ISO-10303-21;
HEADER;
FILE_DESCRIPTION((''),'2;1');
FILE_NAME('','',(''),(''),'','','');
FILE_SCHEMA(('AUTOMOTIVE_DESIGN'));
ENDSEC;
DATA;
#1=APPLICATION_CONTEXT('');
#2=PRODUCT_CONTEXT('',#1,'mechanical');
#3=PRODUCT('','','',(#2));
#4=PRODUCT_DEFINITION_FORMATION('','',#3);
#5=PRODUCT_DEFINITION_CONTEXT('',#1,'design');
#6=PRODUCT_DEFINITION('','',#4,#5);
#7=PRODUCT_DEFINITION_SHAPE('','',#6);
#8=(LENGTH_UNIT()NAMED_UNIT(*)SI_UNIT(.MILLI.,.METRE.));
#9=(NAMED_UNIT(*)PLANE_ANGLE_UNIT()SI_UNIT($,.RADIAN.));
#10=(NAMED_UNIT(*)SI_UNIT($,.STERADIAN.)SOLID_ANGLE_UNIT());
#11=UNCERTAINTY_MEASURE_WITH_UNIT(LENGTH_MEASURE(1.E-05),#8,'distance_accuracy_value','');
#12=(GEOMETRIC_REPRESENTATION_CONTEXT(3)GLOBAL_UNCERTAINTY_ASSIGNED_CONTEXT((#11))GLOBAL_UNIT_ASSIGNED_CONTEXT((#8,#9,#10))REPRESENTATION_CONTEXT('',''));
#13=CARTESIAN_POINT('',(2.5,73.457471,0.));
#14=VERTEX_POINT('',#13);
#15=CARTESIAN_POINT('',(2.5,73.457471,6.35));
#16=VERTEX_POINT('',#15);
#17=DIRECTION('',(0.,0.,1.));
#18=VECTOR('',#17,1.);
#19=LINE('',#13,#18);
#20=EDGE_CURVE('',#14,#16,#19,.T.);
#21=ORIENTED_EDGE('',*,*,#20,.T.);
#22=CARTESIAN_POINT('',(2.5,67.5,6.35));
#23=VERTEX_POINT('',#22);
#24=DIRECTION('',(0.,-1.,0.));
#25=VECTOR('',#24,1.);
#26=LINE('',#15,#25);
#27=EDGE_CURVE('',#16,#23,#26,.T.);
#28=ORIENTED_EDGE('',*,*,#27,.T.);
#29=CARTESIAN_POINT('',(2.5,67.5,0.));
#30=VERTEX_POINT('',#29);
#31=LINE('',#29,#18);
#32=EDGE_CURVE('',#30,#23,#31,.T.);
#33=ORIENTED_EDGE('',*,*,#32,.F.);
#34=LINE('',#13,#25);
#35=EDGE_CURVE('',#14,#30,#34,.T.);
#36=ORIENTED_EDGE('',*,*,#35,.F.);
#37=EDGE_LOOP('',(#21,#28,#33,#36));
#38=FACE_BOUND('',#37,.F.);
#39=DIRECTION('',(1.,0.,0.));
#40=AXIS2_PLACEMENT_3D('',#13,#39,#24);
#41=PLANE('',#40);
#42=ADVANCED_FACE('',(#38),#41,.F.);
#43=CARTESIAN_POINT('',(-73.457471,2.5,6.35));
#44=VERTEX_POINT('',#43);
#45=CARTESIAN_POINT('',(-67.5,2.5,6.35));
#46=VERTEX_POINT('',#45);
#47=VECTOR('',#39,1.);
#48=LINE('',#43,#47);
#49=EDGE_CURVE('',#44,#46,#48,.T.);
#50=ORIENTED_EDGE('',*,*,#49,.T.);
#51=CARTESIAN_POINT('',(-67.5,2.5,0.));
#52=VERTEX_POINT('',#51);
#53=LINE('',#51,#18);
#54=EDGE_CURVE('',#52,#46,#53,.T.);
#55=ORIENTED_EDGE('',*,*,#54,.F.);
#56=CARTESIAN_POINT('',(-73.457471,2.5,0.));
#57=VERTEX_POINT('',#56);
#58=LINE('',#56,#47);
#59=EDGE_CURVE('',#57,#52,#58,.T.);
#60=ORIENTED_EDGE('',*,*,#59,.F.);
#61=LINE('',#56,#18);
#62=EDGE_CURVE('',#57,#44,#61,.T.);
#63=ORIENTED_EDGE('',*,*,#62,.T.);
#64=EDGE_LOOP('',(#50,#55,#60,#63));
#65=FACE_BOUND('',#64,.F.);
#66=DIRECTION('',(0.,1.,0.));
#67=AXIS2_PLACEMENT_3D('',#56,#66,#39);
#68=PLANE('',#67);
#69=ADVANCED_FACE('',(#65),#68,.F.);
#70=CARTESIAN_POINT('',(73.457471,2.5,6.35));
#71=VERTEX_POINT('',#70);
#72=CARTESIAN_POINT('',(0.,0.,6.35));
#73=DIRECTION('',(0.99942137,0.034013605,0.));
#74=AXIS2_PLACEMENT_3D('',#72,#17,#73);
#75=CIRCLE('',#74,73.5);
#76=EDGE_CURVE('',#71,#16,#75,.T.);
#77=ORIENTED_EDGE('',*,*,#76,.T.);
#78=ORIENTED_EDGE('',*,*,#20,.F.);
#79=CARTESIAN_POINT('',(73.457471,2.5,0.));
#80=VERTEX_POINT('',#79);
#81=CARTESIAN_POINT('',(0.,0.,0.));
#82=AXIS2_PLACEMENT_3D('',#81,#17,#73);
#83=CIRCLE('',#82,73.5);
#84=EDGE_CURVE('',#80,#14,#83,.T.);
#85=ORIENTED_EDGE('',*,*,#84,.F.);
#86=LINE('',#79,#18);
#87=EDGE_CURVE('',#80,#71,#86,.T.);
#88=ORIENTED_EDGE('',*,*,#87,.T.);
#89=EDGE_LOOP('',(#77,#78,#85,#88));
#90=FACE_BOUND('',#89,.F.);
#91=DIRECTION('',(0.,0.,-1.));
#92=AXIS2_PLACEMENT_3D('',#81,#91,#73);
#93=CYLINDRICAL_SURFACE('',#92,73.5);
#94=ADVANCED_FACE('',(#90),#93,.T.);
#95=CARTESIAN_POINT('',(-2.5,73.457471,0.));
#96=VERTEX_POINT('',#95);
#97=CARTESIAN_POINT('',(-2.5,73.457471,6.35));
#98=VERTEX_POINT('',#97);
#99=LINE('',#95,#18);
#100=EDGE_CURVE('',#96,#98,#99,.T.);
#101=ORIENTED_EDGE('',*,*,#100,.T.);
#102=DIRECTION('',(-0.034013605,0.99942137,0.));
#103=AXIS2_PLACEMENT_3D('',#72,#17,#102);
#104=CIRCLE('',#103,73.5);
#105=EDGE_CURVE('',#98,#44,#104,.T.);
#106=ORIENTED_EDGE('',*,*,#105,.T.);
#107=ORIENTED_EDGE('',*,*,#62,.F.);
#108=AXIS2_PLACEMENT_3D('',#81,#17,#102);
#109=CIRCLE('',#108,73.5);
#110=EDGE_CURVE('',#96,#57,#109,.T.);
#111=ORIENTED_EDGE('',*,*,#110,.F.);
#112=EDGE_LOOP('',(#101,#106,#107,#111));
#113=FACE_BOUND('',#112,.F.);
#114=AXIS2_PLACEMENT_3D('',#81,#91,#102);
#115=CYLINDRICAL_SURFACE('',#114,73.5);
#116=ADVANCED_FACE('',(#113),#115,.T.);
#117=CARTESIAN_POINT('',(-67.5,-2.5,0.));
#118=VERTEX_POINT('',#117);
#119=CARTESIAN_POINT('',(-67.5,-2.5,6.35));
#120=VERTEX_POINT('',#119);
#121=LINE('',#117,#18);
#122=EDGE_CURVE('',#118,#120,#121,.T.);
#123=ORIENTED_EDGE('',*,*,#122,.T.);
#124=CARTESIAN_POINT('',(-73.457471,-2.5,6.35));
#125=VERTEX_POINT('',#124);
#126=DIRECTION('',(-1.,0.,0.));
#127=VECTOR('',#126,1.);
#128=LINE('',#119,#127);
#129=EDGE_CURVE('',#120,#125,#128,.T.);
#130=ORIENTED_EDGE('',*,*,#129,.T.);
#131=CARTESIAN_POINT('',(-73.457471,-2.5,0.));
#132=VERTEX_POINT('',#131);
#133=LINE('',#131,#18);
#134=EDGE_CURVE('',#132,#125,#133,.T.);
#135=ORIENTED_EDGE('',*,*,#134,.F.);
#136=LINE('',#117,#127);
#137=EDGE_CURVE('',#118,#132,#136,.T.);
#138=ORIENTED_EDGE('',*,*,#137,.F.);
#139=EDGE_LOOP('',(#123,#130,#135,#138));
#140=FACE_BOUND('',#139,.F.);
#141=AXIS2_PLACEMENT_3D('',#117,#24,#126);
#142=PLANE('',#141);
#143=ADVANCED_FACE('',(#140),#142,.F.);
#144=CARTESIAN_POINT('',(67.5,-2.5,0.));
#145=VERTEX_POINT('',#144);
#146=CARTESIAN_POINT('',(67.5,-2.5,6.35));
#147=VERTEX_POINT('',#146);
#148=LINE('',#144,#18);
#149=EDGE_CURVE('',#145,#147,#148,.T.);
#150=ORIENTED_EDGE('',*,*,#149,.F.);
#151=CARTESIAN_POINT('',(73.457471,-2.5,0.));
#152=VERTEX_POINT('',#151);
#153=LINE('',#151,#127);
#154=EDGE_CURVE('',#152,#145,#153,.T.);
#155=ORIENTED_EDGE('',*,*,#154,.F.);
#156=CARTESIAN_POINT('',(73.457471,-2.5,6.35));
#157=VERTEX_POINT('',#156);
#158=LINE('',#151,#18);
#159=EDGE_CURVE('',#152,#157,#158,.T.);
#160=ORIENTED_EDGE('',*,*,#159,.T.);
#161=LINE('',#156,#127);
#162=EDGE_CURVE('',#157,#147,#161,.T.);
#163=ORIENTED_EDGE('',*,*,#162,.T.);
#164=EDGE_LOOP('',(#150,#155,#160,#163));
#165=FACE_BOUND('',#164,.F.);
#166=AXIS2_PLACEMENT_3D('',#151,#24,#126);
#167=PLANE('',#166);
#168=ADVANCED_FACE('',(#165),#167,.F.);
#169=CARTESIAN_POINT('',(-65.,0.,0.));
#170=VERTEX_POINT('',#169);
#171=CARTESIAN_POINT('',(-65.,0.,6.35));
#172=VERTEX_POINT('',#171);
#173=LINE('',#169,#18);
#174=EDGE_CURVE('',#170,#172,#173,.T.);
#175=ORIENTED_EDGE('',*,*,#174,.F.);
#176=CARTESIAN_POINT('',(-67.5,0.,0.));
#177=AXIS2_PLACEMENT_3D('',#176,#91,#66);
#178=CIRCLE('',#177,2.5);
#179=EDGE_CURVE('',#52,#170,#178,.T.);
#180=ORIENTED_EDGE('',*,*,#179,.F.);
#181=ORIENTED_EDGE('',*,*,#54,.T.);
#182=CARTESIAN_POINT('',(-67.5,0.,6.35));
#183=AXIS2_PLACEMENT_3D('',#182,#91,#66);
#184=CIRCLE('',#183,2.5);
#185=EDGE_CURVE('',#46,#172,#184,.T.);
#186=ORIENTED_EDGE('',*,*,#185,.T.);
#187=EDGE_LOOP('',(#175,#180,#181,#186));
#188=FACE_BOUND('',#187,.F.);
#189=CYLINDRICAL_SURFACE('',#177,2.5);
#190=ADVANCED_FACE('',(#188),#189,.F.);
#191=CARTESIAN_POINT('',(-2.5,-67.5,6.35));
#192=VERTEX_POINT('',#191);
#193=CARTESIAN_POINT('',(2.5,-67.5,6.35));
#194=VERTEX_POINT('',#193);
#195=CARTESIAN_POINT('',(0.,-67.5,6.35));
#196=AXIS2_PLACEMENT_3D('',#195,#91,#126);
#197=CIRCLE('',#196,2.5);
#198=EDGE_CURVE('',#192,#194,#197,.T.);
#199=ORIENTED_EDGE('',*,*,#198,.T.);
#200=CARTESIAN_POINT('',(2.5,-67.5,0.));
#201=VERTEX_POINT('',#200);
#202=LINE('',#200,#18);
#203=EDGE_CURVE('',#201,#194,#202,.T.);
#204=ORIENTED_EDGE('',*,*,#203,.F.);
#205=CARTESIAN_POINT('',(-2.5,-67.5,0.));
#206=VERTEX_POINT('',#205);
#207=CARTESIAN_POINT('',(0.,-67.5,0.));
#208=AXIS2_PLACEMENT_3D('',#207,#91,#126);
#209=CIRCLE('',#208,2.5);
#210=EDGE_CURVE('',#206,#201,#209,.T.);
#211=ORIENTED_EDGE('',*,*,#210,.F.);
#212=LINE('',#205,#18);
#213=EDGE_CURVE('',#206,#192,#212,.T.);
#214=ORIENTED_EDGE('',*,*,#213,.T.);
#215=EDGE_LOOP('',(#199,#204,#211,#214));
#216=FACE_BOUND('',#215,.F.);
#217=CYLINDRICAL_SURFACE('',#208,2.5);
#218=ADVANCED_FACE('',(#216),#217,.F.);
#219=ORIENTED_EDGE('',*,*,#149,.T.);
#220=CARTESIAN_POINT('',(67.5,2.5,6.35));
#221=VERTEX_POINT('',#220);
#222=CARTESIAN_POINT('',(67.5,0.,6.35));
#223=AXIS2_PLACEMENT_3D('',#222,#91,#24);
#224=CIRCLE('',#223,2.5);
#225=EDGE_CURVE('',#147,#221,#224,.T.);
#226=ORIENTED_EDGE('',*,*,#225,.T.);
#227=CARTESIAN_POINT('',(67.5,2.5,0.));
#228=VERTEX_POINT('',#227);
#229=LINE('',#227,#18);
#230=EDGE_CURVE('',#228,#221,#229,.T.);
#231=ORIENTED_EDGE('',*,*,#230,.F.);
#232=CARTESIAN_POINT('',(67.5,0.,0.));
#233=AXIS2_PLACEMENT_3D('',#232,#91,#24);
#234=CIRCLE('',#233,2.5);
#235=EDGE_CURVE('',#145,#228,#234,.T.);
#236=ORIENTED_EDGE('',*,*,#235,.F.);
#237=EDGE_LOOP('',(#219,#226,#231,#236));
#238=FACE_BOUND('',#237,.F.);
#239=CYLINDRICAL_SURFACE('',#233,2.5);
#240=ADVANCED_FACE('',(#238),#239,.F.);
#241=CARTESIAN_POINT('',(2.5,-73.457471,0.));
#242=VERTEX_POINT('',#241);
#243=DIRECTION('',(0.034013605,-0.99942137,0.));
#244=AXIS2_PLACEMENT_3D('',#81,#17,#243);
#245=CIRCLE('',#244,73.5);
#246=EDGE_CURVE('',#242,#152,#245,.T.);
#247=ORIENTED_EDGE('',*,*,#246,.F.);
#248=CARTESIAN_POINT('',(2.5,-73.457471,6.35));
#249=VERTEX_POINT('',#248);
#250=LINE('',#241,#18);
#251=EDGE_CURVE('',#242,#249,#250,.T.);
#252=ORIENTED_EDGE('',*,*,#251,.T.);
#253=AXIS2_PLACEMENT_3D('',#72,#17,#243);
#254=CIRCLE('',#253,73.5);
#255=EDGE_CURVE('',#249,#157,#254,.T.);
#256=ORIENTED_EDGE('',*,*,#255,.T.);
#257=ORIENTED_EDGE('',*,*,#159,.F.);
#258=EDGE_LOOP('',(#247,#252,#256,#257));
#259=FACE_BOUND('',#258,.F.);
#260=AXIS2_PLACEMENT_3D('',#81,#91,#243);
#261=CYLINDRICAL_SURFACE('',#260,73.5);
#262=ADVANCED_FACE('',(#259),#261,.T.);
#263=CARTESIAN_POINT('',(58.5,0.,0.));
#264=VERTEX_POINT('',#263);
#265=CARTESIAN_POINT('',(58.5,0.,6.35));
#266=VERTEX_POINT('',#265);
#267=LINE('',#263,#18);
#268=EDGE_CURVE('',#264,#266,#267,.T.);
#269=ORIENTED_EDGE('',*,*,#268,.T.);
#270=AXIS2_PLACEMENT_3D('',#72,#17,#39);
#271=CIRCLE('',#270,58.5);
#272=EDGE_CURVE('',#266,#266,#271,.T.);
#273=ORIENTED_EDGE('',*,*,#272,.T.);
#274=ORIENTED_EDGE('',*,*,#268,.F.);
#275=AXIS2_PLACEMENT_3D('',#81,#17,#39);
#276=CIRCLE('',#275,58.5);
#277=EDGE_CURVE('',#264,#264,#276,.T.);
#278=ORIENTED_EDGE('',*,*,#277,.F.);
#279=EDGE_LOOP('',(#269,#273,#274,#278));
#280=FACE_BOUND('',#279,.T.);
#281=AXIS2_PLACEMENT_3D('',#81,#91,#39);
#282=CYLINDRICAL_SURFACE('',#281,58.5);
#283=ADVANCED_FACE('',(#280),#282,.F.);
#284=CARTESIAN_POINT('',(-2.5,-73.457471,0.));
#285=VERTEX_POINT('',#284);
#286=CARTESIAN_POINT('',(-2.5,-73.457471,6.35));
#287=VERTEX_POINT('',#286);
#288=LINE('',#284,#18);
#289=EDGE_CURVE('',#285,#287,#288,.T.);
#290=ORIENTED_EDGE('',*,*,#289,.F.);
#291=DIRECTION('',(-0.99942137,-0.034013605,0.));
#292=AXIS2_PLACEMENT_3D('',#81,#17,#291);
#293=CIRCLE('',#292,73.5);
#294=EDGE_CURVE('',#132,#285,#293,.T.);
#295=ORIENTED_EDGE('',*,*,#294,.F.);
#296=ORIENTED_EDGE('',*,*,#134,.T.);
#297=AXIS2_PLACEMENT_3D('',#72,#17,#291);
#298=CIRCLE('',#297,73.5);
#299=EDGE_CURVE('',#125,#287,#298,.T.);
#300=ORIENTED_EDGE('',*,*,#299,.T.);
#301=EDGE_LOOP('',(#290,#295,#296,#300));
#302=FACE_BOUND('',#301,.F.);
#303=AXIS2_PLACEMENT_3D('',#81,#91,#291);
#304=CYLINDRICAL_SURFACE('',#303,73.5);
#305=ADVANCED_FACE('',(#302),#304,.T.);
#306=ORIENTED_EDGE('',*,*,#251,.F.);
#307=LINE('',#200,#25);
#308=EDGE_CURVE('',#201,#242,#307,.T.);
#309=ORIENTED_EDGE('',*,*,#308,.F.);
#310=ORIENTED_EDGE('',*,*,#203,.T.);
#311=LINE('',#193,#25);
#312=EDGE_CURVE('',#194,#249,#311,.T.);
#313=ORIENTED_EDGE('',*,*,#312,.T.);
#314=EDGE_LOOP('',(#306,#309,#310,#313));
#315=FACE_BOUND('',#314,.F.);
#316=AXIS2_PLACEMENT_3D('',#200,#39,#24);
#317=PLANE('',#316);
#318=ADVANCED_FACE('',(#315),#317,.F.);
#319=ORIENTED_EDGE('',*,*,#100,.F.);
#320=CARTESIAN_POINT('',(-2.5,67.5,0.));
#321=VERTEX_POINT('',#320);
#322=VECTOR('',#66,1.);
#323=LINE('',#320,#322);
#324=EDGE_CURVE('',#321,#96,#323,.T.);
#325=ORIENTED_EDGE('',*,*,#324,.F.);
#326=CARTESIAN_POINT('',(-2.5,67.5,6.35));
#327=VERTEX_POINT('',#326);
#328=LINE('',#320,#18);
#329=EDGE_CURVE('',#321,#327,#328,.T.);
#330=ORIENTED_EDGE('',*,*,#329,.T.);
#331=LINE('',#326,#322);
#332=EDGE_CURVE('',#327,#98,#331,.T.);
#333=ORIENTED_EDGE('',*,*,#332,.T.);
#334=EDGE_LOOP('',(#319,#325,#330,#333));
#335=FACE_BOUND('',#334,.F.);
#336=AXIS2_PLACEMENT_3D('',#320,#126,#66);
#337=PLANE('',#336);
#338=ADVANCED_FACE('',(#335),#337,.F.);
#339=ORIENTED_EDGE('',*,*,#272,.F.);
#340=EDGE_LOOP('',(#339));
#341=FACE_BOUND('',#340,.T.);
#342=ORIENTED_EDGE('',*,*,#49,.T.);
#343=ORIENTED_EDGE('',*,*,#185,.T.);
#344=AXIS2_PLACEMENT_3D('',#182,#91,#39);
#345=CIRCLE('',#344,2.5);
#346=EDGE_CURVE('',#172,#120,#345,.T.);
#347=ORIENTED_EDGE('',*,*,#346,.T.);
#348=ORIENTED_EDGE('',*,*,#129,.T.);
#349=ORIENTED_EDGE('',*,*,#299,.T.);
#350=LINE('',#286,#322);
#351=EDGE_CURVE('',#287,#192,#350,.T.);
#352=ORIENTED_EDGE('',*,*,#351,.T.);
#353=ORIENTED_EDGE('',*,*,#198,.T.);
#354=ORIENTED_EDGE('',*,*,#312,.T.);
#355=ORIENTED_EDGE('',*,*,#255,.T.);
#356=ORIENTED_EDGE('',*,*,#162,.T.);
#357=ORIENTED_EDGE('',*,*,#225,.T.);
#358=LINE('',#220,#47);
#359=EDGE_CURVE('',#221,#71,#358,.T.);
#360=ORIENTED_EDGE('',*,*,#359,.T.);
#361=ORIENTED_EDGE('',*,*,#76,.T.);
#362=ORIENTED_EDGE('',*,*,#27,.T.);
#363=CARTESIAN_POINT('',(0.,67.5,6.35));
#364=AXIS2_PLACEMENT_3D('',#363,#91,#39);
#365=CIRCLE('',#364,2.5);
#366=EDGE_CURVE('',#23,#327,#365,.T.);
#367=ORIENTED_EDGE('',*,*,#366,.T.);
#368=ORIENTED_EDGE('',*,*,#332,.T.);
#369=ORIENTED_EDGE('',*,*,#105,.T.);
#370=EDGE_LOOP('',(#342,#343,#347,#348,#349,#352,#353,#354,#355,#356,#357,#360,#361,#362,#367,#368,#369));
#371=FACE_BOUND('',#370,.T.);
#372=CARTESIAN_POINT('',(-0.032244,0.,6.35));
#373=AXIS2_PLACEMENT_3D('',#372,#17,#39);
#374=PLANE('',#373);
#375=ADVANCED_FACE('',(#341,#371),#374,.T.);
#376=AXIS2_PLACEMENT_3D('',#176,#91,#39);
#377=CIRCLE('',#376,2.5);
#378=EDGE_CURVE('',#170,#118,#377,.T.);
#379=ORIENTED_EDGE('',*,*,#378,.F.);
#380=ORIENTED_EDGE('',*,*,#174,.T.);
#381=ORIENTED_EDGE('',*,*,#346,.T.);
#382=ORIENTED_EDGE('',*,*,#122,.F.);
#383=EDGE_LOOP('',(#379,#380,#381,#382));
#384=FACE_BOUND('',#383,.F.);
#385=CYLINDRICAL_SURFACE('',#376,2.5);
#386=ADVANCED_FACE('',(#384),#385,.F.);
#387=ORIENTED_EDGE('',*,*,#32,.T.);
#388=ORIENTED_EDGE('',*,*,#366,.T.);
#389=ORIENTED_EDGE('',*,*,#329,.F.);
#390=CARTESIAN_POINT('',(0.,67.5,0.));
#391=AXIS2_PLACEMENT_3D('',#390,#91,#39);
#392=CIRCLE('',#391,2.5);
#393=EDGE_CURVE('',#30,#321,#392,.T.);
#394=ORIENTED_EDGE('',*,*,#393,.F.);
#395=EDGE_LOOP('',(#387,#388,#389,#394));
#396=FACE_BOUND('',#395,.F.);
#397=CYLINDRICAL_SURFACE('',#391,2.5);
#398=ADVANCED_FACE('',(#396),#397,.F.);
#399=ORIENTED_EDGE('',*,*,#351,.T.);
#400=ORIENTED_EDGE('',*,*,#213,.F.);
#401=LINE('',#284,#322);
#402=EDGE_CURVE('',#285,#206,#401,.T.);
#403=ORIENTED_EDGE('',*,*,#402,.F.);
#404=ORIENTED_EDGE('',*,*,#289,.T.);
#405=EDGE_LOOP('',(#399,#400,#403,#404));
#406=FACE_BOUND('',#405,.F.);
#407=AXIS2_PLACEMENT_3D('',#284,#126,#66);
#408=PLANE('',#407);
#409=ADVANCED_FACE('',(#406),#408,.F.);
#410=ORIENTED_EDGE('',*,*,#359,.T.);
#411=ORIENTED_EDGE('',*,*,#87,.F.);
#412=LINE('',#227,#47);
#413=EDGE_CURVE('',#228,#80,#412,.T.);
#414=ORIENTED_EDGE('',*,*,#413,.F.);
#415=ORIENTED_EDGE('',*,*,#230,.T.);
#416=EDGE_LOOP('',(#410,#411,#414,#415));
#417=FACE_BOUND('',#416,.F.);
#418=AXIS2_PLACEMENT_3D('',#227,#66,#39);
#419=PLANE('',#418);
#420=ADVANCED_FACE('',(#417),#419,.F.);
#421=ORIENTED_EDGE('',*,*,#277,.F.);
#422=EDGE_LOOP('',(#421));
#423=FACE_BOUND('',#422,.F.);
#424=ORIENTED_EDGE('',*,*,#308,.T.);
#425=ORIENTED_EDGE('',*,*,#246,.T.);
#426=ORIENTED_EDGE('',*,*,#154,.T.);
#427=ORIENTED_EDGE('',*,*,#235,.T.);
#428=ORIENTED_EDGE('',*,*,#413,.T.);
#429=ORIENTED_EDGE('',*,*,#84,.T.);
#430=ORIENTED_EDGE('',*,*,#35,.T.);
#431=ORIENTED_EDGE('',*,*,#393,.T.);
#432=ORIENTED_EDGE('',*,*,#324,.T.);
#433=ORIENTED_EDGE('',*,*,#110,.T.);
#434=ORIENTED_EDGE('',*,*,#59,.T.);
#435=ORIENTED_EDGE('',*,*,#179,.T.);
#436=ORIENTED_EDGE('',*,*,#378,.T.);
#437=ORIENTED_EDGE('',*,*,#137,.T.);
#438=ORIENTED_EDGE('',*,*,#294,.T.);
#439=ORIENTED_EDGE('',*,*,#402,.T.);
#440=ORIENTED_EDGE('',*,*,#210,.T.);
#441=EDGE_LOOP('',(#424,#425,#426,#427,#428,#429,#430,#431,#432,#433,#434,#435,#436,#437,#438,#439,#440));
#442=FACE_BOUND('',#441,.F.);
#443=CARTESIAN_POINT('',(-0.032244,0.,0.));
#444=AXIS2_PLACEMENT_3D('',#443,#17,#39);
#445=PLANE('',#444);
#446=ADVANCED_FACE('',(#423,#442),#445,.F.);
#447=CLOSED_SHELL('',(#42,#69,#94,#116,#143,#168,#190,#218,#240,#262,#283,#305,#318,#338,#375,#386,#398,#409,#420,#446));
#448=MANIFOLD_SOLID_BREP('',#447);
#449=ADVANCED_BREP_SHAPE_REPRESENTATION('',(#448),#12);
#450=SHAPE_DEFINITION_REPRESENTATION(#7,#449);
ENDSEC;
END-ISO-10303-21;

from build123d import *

# Parameters (mm, degrees)
F0_R     = 58.5
F1_DEPTH = 6.35


# Not quite as in the source:
# - a length typed as a fraction of an inch, garbled in the dataset ("3 / 203.2 mm" for 3/8 in), is restored


with BuildPart() as f1:
    # F0 (on Top) → F1 (new body)
    with BuildSketch(Plane.XY):
        with BuildLine():
            Line((67.5, 2.5), (73.4574706888, 2.5))
            ThreePointArc((73.4574706888, 2.5), (51.9723484172, 51.9723484172), (2.5, 73.4574706888))
            Line((2.5, 73.4574706888), (2.5, 67.5))
            ThreePointArc((2.5, 67.5), (0, 65), (-2.5, 67.5))
            Line((-2.5, 67.5), (-2.5, 73.4574706888))
            ThreePointArc((-2.5, 73.4574706888), (-51.9723484172, 51.9723484172), (-73.4574706888, 2.5))
            Line((-73.4574706888, 2.5), (-67.5, 2.5))
            ThreePointArc((-67.5, 2.5), (-65.732233047, 1.767766953), (-65, 0))
            ThreePointArc((-65, 0), (-65.732233047, -1.767766953), (-67.5, -2.5))
            Line((-67.5, -2.5), (-73.4574706888, -2.5))
            ThreePointArc((-73.4574706888, -2.5), (-51.9723484172, -51.9723484172), (-2.5, -73.4574706888))
            Line((-2.5, -73.4574706888), (-2.5, -67.5))
            ThreePointArc((-2.5, -67.5), (0, -65), (2.5, -67.5))
            Line((2.5, -67.5), (2.5, -73.4574706888))
            ThreePointArc((2.5, -73.4574706888), (51.9723484172, -51.9723484172), (73.4574706888, -2.5))
            Line((73.4574706888, -2.5), (67.5, -2.5))
            ThreePointArc((67.5, -2.5), (65, 0), (67.5, 2.5))
        make_face()
        Circle(F0_R, mode=Mode.SUBTRACT)
    extrude(amount=F1_DEPTH)


solid = f1.part
